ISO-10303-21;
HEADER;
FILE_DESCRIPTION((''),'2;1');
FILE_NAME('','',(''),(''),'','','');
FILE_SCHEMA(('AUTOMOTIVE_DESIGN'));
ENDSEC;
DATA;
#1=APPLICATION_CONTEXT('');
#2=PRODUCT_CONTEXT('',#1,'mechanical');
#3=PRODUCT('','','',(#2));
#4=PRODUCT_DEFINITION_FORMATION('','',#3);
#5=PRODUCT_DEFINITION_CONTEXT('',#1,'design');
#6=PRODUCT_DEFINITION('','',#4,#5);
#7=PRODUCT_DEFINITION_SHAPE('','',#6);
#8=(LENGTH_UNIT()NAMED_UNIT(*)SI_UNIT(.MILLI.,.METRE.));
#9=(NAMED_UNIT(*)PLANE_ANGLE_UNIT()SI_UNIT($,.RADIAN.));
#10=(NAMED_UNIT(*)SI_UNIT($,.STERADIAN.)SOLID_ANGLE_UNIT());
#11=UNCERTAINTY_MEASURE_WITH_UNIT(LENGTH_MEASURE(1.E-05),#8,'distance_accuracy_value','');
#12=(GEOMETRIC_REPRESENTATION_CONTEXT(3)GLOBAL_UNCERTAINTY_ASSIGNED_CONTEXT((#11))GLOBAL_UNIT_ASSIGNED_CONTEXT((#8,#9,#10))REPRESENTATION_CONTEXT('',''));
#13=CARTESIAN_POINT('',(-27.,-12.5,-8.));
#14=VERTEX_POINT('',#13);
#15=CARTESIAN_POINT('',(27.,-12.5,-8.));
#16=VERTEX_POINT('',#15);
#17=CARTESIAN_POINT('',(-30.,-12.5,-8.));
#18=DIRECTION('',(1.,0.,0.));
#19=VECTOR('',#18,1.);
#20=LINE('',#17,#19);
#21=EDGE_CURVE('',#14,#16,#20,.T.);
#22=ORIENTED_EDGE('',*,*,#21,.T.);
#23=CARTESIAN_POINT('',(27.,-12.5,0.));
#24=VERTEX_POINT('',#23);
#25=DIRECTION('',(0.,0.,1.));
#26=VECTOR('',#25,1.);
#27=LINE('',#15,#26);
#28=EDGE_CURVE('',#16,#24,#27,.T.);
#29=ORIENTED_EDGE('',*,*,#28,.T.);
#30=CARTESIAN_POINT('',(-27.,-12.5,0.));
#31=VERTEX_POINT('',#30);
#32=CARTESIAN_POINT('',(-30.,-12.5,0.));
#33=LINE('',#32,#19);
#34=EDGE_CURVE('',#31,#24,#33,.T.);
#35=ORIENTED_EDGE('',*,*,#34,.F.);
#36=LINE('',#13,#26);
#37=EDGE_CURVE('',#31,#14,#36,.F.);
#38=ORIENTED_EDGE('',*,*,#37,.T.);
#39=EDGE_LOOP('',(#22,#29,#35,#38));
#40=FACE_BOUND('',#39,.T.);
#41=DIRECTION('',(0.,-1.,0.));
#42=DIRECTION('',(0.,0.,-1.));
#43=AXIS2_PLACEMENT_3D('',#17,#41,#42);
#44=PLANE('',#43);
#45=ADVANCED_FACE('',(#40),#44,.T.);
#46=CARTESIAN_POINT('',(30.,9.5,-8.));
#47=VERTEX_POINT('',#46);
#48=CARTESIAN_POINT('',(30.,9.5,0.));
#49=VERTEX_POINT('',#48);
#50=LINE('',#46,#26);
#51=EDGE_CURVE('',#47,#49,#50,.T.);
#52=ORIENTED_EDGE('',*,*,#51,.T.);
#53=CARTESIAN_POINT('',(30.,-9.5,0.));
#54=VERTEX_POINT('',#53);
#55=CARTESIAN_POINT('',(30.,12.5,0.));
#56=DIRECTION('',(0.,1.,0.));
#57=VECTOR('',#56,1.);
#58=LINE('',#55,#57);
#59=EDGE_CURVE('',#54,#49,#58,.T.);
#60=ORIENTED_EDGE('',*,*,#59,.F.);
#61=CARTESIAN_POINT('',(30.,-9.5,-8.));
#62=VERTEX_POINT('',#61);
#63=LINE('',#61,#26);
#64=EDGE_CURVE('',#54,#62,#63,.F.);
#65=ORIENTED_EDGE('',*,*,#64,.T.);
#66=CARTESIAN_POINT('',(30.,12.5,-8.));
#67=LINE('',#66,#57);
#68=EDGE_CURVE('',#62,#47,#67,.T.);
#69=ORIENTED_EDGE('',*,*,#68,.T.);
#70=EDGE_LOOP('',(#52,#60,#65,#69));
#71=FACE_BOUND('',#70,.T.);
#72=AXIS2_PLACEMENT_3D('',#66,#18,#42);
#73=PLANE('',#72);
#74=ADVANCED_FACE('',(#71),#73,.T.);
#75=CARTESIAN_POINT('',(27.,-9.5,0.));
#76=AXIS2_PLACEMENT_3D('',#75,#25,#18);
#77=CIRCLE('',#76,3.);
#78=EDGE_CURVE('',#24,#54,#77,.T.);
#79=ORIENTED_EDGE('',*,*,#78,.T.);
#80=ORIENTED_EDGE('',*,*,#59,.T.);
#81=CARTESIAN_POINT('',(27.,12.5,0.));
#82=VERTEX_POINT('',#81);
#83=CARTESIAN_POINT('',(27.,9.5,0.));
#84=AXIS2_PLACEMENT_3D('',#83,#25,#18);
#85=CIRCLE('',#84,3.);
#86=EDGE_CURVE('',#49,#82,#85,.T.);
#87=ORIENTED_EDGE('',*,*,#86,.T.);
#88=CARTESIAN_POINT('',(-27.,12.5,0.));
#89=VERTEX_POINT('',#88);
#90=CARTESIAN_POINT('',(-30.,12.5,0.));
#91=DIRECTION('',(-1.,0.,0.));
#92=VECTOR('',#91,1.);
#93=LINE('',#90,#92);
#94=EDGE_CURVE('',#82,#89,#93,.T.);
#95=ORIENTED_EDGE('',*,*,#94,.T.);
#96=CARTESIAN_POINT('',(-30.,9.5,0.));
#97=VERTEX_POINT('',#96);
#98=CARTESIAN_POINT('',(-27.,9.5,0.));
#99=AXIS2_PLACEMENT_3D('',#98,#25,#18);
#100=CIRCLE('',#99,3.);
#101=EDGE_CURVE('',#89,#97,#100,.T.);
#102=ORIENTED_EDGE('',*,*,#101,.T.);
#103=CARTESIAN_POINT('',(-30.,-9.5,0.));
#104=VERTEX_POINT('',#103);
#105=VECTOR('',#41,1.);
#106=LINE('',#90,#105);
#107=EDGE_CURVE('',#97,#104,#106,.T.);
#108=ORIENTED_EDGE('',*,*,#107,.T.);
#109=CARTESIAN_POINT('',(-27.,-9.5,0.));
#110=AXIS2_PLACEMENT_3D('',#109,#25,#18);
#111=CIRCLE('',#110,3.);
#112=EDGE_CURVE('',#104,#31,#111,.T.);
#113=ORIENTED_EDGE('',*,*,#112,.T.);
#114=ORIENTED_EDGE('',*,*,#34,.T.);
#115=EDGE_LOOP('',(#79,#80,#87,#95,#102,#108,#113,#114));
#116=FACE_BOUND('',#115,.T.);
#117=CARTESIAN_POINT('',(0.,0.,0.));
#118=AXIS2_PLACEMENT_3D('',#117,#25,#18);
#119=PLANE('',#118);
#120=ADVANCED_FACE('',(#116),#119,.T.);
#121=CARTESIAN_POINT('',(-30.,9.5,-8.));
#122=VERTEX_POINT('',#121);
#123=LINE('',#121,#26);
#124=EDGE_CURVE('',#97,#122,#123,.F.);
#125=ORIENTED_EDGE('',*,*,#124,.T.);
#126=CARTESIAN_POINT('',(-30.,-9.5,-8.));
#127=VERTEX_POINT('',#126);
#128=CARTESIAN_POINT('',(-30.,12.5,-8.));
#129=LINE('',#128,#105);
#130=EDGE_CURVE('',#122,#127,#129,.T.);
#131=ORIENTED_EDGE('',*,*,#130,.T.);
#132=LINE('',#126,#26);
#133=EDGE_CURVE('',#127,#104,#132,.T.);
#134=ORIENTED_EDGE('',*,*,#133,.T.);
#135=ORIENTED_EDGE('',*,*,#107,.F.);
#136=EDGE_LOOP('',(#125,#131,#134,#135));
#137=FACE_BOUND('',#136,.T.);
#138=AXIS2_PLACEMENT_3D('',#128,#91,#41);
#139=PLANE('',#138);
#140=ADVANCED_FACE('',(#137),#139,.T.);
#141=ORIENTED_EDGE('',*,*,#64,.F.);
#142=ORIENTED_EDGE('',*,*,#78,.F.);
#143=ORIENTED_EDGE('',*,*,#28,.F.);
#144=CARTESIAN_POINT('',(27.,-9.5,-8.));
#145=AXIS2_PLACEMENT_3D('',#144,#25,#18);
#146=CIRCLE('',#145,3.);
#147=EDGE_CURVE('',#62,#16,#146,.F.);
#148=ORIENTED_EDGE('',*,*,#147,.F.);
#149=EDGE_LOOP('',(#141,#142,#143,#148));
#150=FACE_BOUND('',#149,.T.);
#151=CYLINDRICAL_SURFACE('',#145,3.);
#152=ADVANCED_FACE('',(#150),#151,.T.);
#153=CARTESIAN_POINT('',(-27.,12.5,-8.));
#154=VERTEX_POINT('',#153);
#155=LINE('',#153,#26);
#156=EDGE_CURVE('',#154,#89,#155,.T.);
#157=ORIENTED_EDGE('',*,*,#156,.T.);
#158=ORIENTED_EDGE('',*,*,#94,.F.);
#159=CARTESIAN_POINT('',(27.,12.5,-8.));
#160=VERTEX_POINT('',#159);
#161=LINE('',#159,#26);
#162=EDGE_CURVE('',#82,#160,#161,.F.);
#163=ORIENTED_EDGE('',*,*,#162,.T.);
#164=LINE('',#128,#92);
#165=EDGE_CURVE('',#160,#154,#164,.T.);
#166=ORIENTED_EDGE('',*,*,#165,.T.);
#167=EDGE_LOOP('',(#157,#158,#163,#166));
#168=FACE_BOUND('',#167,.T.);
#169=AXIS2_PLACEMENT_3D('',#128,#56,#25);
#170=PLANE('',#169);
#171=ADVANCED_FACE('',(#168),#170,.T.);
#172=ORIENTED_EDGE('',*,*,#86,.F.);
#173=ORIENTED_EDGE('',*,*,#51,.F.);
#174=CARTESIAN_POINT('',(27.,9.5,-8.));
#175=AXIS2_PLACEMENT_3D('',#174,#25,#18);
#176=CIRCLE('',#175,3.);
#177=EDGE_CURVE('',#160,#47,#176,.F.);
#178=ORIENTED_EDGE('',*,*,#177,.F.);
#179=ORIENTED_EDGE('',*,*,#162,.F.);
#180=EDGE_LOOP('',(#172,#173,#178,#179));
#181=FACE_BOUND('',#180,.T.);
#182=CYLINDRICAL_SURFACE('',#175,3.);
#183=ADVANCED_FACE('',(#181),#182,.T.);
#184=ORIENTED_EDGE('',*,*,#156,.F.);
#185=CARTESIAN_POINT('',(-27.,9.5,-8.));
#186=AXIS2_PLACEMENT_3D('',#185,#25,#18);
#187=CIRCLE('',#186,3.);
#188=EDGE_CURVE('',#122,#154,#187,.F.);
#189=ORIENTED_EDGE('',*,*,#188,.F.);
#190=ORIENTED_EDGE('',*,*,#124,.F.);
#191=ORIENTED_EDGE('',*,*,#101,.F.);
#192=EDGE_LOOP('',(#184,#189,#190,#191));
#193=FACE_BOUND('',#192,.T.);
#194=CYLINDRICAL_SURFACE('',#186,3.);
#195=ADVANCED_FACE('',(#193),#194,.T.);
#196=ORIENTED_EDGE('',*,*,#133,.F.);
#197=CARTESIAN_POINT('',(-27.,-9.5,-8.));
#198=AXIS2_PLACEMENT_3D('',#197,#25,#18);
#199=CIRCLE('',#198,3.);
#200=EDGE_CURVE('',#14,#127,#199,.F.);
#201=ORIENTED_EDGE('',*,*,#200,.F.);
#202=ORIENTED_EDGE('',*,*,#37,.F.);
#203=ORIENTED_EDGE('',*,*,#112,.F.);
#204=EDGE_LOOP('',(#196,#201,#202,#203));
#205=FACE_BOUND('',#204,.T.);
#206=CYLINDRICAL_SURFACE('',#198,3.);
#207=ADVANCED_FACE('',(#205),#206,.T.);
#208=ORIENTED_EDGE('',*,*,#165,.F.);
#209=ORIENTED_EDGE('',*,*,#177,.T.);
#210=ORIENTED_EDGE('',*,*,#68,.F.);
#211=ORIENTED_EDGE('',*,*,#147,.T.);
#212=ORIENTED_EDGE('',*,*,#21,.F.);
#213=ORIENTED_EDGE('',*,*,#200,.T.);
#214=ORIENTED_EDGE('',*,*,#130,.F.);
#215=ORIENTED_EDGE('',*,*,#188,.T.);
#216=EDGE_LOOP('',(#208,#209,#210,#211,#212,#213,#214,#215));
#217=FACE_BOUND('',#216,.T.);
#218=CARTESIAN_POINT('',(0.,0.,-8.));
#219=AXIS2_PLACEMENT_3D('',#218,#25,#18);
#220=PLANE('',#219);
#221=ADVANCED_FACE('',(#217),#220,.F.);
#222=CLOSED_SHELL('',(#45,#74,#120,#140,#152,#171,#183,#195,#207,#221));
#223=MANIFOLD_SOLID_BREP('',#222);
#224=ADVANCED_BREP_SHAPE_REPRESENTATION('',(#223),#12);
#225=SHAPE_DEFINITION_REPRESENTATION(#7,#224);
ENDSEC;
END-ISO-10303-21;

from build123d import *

# Parameters (mm, degrees)
IZIM1_W            = 60
IZIM1_H            = 25
TABAN_FLAN_1_DEPTH = 8
RADYUS1_R          = 3


# Sheet-metal steps are written as plain solids
with BuildPart() as part:
    # Çizim1 → Taban-Flanş1 (new body)
    with BuildSketch(Plane.XY):
        Rectangle(IZIM1_W, IZIM1_H)
    extrude(amount=-TABAN_FLAN_1_DEPTH)

    # Radyus1
    radyus1_edges = [part.edges().sort_by_distance(p)[0] for p in [
        (30, -12.5, -4),
        (-30, -12.5, -4),
        (-30, 12.5, -4),
        (30, 12.5, -4),
    ]]
    fillet(radyus1_edges, radius=RADYUS1_R)


solid = part.part
